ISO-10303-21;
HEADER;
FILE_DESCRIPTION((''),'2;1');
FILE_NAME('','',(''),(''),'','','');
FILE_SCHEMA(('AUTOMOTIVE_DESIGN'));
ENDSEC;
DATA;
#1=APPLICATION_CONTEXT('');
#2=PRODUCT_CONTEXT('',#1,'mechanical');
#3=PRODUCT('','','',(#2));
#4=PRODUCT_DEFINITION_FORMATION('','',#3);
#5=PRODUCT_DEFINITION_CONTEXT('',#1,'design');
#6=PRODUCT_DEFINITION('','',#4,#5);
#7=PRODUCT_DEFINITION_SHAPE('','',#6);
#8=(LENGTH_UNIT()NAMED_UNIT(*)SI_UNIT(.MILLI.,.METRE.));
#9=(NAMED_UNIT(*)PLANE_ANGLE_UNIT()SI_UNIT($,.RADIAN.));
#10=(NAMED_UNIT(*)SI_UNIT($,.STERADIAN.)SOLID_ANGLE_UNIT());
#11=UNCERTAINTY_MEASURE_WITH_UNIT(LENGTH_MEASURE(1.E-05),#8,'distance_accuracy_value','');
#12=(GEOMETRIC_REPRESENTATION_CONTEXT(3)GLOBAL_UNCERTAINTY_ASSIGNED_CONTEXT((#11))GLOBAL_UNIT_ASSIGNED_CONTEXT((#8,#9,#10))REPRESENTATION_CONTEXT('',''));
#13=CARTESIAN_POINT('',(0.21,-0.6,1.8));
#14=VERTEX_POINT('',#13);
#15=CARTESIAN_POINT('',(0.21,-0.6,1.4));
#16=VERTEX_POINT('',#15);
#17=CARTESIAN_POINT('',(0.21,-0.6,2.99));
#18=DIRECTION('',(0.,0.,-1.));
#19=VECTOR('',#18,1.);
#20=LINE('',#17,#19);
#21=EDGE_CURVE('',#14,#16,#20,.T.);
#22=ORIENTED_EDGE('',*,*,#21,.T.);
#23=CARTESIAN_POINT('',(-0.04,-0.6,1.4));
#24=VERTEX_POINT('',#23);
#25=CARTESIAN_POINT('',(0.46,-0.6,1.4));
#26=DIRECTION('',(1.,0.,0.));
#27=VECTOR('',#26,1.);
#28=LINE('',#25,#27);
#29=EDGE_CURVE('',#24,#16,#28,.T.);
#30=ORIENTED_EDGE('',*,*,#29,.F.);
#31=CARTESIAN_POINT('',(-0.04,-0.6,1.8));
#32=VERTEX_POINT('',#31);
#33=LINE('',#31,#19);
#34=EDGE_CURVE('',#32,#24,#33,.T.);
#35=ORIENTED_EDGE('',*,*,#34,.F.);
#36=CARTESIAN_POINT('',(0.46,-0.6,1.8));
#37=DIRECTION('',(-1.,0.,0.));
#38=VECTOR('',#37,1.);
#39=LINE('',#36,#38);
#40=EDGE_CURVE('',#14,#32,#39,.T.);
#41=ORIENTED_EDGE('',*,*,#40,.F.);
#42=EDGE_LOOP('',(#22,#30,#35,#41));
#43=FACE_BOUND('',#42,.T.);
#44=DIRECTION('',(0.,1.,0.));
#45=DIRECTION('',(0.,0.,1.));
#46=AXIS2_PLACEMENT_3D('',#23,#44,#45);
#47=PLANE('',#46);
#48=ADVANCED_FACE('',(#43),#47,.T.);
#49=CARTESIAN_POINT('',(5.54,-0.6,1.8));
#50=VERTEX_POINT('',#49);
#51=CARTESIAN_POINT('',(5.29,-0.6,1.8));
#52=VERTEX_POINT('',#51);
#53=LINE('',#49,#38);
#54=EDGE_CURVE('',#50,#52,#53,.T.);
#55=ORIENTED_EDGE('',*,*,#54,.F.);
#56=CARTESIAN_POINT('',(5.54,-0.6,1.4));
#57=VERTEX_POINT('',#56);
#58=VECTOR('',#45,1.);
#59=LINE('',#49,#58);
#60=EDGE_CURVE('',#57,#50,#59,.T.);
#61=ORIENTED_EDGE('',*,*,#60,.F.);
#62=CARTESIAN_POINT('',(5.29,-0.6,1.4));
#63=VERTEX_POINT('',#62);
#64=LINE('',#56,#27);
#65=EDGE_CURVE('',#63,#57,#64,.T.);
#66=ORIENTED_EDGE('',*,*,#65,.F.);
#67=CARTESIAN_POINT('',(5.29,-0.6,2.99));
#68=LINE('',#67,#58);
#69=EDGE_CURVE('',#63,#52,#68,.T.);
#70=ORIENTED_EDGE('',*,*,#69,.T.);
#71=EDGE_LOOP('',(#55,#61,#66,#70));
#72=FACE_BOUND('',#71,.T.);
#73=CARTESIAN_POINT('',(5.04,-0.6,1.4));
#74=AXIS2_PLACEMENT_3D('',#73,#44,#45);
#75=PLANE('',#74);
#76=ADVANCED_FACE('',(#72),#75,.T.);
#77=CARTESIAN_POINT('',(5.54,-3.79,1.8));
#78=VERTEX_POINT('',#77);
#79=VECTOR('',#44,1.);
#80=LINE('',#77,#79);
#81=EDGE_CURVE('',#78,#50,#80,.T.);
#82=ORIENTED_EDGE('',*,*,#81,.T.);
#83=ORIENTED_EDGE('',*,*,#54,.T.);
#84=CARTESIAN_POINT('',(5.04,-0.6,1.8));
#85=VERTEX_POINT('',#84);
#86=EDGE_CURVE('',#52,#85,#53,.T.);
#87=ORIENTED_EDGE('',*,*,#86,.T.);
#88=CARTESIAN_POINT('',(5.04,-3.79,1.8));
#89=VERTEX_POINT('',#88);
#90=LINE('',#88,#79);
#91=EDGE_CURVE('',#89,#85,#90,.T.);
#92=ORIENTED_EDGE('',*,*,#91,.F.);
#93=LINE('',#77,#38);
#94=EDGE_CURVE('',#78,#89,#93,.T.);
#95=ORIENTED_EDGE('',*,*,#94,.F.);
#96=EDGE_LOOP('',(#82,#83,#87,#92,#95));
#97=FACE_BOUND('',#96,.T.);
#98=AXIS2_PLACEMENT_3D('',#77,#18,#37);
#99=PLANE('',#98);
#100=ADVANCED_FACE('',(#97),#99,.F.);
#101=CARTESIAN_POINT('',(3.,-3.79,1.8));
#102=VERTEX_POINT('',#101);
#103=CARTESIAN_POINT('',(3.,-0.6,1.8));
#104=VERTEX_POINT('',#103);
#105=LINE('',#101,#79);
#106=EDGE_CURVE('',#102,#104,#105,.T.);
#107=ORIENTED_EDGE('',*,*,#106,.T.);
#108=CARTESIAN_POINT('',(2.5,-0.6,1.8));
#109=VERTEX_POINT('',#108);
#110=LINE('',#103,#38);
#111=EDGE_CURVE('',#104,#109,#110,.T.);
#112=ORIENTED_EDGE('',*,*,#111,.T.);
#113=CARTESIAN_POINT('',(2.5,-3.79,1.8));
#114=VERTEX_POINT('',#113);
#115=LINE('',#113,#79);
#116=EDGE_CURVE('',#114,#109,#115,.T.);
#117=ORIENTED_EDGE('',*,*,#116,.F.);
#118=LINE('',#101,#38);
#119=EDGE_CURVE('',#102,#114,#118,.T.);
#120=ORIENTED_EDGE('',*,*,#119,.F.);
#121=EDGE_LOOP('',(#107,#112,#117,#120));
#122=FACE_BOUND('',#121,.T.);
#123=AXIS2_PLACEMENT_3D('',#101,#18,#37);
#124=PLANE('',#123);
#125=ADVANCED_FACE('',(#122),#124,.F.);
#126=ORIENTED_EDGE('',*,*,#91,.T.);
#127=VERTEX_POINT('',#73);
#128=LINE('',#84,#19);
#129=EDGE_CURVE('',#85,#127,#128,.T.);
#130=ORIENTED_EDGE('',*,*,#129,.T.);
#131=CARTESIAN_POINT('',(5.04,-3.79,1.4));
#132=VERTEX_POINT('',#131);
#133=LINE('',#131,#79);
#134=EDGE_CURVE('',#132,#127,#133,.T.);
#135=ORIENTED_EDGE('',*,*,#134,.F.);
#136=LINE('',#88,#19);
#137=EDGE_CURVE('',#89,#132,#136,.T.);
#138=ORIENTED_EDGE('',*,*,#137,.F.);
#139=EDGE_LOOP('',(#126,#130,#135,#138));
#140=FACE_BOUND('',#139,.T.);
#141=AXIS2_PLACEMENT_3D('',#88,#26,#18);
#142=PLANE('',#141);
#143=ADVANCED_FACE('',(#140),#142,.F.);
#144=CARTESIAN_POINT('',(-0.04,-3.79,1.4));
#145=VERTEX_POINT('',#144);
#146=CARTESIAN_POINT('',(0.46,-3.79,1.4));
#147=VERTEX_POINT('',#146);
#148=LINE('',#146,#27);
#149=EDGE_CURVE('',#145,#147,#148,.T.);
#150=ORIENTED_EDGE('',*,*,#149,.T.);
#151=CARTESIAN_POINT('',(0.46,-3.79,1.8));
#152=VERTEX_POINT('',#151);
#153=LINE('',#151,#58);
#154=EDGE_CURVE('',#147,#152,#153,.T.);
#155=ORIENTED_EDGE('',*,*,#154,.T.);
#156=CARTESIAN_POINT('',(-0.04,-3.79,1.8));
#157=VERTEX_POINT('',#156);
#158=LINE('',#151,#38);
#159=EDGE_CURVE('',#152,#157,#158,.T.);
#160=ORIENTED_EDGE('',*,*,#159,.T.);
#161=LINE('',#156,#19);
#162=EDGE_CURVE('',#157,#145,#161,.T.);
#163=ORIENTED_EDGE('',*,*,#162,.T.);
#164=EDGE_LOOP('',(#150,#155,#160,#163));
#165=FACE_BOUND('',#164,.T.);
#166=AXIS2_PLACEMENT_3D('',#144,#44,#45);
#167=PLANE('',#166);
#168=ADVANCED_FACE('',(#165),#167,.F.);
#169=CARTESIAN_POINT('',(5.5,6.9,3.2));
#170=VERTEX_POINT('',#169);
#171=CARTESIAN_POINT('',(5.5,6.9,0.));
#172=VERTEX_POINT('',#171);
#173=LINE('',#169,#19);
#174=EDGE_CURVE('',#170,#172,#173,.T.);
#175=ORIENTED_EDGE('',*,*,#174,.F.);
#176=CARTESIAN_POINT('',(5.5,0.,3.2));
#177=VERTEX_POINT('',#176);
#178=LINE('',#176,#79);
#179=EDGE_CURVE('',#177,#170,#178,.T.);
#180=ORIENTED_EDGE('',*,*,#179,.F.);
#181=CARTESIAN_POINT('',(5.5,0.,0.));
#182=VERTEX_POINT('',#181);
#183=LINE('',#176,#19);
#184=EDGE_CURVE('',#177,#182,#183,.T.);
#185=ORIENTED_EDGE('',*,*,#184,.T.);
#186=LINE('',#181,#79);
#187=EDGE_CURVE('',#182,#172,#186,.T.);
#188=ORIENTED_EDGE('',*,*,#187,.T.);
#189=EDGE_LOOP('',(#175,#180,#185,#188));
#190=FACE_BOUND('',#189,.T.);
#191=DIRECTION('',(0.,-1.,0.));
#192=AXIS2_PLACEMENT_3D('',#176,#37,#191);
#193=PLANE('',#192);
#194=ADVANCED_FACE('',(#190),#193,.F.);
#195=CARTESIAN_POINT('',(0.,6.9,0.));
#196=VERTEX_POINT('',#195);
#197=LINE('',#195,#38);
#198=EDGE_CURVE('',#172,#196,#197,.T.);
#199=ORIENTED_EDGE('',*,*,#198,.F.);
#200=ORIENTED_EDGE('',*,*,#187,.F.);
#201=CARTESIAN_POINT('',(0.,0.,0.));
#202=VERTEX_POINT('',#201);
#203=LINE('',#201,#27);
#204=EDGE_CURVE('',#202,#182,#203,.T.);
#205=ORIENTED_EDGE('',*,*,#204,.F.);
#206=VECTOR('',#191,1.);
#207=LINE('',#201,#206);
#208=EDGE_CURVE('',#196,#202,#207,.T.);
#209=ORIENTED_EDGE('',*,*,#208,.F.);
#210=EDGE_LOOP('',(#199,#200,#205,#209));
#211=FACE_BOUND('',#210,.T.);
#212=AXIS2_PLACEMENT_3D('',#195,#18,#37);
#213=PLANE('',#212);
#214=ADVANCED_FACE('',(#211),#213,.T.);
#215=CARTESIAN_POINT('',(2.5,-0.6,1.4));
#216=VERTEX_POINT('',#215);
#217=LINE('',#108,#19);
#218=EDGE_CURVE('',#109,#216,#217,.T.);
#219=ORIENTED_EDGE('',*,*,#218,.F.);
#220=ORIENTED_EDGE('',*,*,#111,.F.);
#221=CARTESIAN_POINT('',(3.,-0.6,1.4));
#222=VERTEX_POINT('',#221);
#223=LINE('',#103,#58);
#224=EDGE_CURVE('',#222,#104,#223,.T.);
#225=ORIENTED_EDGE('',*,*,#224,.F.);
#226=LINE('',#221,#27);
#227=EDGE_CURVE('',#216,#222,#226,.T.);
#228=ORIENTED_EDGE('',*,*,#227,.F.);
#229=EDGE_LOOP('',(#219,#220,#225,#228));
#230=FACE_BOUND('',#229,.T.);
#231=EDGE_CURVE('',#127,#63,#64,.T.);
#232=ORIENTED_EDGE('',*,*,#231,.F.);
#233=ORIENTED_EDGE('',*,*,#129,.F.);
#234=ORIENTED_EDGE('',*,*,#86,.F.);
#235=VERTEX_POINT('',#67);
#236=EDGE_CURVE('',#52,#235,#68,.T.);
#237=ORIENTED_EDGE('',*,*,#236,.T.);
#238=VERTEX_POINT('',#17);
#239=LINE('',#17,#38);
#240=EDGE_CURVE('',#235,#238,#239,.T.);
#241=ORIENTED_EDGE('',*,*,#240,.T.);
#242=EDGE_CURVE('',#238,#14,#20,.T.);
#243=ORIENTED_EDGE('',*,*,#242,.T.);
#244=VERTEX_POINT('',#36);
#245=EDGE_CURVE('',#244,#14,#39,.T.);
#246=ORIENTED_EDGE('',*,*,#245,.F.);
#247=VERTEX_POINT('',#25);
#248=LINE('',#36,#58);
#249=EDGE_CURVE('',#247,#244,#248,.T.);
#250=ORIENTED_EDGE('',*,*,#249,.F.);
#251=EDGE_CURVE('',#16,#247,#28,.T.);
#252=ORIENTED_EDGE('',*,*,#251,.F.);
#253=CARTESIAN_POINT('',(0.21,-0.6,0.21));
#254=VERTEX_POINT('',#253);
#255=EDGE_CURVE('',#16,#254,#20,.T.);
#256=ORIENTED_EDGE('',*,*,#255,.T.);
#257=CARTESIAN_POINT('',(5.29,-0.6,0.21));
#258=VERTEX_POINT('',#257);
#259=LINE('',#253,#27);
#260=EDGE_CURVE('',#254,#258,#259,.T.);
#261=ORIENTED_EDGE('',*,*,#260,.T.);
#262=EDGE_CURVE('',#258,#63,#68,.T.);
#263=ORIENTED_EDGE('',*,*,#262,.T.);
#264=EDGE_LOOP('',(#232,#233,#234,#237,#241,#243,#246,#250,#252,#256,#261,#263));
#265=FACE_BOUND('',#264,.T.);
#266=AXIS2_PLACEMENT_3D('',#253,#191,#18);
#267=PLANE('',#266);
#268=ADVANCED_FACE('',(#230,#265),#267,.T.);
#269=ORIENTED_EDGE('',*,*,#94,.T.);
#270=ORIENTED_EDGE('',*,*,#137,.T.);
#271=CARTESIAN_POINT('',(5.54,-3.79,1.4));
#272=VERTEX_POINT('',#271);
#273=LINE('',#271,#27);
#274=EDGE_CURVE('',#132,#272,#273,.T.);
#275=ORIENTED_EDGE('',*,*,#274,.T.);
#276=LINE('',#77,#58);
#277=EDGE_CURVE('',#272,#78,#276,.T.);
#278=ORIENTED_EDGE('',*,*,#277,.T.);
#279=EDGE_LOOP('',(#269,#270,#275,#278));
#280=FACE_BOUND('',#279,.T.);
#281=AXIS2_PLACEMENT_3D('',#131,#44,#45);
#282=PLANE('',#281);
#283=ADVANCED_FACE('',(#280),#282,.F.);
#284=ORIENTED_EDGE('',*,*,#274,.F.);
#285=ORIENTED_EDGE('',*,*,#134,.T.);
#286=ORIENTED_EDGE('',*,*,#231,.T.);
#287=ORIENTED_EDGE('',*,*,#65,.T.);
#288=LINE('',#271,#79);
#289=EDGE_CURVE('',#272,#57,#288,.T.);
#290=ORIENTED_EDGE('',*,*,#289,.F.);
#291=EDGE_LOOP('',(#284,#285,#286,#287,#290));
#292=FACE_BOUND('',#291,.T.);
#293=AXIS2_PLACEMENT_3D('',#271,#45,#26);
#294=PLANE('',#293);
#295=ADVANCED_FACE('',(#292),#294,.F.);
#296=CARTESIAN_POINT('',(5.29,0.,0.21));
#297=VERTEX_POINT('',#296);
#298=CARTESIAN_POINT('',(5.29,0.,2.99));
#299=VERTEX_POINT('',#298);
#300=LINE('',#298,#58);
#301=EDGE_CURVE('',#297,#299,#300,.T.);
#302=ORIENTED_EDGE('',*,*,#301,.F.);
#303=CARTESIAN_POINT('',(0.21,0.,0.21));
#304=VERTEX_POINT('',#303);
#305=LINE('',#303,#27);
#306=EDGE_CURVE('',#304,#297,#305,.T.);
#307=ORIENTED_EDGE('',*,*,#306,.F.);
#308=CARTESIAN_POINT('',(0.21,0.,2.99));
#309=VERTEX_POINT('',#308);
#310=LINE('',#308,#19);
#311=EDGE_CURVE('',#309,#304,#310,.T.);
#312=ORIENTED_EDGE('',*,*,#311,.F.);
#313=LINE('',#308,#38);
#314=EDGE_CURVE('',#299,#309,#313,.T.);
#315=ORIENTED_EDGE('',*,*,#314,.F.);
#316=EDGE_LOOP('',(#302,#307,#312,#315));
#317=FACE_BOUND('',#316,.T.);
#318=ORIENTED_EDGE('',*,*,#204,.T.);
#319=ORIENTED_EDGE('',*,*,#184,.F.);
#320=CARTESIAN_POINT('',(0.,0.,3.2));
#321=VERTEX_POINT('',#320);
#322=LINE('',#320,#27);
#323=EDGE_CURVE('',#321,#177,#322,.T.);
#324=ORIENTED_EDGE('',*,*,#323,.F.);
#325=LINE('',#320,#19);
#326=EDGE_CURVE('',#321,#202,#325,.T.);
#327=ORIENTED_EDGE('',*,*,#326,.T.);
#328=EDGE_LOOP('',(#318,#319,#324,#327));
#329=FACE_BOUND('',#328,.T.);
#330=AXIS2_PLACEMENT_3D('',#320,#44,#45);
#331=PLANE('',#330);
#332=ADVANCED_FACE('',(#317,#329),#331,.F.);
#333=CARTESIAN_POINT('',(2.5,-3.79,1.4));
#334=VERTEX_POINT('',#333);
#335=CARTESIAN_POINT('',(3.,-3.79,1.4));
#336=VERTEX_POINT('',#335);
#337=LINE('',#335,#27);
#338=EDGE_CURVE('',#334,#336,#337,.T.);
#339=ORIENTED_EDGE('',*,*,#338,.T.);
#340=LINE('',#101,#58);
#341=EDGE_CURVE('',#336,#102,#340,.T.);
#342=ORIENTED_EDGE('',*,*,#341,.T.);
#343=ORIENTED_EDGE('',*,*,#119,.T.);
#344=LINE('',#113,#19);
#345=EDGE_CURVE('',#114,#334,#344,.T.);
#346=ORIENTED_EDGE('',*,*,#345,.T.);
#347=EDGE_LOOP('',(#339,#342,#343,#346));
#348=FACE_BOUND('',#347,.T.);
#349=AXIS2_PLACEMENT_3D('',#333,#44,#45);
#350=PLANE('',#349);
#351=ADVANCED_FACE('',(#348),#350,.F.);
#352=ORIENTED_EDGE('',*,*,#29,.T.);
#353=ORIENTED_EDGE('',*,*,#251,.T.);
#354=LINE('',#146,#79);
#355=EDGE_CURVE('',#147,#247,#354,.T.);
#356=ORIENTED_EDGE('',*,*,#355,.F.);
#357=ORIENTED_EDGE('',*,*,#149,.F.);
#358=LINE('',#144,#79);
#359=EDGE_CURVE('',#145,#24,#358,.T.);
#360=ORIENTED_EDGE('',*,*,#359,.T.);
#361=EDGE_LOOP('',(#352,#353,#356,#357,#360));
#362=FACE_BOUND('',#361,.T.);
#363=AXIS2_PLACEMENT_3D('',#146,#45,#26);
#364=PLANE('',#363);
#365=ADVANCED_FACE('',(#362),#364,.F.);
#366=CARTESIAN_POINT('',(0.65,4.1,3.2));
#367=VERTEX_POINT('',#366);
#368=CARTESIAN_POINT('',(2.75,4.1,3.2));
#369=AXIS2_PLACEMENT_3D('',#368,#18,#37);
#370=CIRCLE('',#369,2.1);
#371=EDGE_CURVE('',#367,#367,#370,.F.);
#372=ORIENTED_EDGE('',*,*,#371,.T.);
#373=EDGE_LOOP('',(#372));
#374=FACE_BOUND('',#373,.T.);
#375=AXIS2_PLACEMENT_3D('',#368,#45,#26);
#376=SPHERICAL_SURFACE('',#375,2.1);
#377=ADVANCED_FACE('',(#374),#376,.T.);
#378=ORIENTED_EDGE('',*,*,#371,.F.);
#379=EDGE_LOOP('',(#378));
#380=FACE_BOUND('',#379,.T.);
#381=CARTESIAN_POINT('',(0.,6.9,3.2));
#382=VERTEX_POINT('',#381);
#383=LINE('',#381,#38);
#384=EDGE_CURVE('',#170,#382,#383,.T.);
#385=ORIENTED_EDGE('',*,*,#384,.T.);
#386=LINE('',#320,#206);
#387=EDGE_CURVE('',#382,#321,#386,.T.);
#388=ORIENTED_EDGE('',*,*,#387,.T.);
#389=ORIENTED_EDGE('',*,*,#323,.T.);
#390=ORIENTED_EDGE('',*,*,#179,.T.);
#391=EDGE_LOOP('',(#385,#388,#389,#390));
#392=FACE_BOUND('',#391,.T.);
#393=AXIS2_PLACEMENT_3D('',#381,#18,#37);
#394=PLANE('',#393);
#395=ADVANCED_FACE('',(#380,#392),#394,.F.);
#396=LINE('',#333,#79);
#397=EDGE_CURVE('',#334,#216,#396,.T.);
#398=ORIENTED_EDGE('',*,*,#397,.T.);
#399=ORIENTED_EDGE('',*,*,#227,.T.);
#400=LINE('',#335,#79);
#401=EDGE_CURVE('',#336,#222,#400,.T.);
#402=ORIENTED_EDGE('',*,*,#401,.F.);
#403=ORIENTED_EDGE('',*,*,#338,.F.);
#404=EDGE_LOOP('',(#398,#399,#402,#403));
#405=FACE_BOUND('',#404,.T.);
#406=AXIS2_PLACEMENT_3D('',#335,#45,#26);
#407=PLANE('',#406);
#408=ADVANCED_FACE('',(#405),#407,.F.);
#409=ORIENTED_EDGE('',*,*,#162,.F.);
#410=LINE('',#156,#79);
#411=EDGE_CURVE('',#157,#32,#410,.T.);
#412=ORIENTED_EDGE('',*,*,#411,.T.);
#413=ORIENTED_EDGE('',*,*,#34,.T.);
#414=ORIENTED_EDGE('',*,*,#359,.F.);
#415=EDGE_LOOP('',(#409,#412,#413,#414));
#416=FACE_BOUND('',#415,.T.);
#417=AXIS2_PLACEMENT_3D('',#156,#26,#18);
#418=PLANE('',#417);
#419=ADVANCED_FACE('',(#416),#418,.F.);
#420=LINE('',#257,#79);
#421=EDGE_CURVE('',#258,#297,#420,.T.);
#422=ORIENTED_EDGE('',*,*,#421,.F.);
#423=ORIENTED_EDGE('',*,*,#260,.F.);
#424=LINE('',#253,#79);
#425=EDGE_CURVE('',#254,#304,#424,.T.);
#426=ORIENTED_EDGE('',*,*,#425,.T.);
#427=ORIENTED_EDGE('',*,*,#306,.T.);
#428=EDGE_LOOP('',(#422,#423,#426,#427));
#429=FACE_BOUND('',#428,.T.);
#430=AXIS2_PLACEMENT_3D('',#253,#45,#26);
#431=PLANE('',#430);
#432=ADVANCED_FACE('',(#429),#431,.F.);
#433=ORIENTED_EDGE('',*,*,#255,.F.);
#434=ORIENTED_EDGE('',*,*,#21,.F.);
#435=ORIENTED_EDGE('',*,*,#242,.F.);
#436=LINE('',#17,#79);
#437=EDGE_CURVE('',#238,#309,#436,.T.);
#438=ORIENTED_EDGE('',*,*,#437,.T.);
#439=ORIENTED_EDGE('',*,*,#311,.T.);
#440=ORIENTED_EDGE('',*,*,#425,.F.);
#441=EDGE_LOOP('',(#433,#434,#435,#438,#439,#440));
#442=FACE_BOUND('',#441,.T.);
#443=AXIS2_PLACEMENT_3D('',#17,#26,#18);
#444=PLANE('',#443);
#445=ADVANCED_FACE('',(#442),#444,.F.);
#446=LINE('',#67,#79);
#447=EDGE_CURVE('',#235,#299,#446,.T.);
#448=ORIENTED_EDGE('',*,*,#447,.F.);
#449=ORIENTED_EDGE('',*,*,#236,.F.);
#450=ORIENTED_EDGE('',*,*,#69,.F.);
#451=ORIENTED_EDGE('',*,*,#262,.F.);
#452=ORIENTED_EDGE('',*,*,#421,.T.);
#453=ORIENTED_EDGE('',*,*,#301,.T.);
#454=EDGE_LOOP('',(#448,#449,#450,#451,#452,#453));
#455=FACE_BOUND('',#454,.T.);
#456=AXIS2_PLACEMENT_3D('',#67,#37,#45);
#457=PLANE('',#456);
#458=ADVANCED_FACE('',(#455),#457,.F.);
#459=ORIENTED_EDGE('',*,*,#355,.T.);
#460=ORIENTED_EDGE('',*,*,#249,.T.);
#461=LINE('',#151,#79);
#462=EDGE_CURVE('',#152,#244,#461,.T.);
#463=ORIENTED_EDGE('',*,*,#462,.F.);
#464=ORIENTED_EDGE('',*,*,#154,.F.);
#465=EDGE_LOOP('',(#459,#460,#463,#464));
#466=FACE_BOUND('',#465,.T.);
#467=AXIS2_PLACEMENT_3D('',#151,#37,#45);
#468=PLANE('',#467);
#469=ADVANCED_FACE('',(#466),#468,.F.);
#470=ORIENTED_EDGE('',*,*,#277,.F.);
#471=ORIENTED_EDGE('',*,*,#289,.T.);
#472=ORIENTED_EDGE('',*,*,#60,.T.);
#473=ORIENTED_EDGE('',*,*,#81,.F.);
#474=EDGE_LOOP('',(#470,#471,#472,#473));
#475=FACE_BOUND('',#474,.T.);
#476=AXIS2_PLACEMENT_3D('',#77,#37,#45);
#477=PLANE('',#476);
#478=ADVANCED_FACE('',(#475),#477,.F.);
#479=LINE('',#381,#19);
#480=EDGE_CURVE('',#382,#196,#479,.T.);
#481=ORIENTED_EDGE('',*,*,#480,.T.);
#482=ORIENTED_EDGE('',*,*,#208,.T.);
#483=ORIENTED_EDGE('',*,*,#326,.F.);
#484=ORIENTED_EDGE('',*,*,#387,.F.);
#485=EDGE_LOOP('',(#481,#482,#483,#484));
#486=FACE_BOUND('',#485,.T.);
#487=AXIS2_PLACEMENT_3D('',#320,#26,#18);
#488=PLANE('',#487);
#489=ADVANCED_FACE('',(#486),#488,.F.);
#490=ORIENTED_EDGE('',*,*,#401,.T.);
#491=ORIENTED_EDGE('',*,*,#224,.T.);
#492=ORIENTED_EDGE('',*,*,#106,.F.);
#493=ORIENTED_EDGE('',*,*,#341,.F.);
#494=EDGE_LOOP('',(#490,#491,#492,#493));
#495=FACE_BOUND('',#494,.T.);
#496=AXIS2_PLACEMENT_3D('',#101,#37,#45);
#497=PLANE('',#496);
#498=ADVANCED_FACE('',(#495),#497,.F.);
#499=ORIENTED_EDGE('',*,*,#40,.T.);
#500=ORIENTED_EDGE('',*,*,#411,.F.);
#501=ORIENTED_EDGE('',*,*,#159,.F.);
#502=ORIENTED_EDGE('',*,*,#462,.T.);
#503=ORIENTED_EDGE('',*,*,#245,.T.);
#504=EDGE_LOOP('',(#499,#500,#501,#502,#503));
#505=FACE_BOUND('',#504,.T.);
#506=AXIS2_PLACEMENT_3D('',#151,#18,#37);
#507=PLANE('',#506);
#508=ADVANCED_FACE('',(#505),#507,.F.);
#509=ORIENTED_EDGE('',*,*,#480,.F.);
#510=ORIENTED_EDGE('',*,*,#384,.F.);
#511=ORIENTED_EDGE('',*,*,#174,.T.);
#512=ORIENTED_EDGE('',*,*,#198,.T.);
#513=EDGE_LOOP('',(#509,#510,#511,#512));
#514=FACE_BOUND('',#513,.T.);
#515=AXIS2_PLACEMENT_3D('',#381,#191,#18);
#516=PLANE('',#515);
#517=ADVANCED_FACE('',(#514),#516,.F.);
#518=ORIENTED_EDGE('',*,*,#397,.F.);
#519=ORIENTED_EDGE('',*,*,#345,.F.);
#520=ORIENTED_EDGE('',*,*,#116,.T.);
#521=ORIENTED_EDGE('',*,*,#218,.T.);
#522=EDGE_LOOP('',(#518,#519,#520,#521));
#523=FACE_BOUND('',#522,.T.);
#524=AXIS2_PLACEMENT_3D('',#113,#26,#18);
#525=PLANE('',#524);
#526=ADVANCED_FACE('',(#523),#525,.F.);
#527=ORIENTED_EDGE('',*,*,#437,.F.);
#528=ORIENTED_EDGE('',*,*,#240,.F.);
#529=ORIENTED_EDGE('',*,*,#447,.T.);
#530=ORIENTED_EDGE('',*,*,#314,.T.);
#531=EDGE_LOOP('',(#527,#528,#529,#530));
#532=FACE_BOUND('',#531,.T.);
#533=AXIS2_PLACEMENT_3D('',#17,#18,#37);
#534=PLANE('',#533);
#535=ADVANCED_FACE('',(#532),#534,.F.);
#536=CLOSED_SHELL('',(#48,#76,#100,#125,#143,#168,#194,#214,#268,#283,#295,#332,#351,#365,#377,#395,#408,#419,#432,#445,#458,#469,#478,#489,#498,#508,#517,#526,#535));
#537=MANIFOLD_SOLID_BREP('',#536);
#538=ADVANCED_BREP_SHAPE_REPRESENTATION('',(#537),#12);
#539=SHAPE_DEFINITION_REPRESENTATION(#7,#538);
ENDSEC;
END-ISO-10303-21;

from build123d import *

# Parameters (mm, degrees)
SKETCH1_W           = 5.5
SKETCH1_H           = 6.9
BOSS_EXTRUDE1_DEPTH = 3.2
SKETCH4_R           = 2.1
BOSS_EXTRUDE2_DEPTH = 2.1
FILLET1_R           = 2.1
SKETCH5_W           = 5.08
SKETCH5_H           = 2.78
BOSS_EXTRUDE3_DEPTH = 0.6
SKETCH7_W           = 0.5
SKETCH7_H           = 0.4
BOSS_EXTRUDE5_DEPTH = 3.19
LPATTERN1_COUNT     = 2
LPATTERN1_PITCH     = 2.54
LPATTERN1_COL_COUNT = 2
LPATTERN1_COL_PITCH = 2.54


with BuildPart() as part:
    # Sketch1 → Boss-Extrude1 (new body)
    with BuildSketch(Plane.XY):
        with Locations((2.75, 3.45)):
            Rectangle(SKETCH1_W, SKETCH1_H)
    extrude(amount=BOSS_EXTRUDE1_DEPTH)

    # Sketch4 → Boss-Extrude2 (add)
    with BuildSketch(Plane.XY.offset(3.2)):
        with Locations(Location((2.75, 4.1, 0), (0, 0, 180))):
            Circle(SKETCH4_R)
    extrude(amount=BOSS_EXTRUDE2_DEPTH)

    # Fillet1
    fillet1_edges = [part.edges().sort_by_distance(p)[0] for p in [
        (4.85, 4.1, 5.3),
    ]]
    fillet(fillet1_edges, radius=FILLET1_R - 0.0001)  # a hair under: the kernel refuses the full size

    # Sketch5 → Boss-Extrude3 (add)
    with BuildSketch(Plane.XZ):
        with Locations((2.75, 1.6)):
            Rectangle(SKETCH5_W, SKETCH5_H)
    extrude(amount=BOSS_EXTRUDE3_DEPTH)

    # Sketch7 → Boss-Extrude5 (add)
    with BuildSketch(Plane.XZ.offset(0.6)):
        with Locations((2.75, 1.6)):
            Rectangle(SKETCH7_W, SKETCH7_H)
    boss_extrude5 = extrude(amount=BOSS_EXTRUDE5_DEPTH)

    # LPattern1: Boss-Extrude5 ×2
    with Locations(*[(-i * LPATTERN1_PITCH, 0, 0) for i in range(1, LPATTERN1_COUNT)]):
        add(boss_extrude5)

    # LPattern1 col: Boss-Extrude5 ×2
    with Locations(*[(i * LPATTERN1_COL_PITCH, 0, 0) for i in range(1, LPATTERN1_COL_COUNT)]):
        add(boss_extrude5)


solid = part.part
